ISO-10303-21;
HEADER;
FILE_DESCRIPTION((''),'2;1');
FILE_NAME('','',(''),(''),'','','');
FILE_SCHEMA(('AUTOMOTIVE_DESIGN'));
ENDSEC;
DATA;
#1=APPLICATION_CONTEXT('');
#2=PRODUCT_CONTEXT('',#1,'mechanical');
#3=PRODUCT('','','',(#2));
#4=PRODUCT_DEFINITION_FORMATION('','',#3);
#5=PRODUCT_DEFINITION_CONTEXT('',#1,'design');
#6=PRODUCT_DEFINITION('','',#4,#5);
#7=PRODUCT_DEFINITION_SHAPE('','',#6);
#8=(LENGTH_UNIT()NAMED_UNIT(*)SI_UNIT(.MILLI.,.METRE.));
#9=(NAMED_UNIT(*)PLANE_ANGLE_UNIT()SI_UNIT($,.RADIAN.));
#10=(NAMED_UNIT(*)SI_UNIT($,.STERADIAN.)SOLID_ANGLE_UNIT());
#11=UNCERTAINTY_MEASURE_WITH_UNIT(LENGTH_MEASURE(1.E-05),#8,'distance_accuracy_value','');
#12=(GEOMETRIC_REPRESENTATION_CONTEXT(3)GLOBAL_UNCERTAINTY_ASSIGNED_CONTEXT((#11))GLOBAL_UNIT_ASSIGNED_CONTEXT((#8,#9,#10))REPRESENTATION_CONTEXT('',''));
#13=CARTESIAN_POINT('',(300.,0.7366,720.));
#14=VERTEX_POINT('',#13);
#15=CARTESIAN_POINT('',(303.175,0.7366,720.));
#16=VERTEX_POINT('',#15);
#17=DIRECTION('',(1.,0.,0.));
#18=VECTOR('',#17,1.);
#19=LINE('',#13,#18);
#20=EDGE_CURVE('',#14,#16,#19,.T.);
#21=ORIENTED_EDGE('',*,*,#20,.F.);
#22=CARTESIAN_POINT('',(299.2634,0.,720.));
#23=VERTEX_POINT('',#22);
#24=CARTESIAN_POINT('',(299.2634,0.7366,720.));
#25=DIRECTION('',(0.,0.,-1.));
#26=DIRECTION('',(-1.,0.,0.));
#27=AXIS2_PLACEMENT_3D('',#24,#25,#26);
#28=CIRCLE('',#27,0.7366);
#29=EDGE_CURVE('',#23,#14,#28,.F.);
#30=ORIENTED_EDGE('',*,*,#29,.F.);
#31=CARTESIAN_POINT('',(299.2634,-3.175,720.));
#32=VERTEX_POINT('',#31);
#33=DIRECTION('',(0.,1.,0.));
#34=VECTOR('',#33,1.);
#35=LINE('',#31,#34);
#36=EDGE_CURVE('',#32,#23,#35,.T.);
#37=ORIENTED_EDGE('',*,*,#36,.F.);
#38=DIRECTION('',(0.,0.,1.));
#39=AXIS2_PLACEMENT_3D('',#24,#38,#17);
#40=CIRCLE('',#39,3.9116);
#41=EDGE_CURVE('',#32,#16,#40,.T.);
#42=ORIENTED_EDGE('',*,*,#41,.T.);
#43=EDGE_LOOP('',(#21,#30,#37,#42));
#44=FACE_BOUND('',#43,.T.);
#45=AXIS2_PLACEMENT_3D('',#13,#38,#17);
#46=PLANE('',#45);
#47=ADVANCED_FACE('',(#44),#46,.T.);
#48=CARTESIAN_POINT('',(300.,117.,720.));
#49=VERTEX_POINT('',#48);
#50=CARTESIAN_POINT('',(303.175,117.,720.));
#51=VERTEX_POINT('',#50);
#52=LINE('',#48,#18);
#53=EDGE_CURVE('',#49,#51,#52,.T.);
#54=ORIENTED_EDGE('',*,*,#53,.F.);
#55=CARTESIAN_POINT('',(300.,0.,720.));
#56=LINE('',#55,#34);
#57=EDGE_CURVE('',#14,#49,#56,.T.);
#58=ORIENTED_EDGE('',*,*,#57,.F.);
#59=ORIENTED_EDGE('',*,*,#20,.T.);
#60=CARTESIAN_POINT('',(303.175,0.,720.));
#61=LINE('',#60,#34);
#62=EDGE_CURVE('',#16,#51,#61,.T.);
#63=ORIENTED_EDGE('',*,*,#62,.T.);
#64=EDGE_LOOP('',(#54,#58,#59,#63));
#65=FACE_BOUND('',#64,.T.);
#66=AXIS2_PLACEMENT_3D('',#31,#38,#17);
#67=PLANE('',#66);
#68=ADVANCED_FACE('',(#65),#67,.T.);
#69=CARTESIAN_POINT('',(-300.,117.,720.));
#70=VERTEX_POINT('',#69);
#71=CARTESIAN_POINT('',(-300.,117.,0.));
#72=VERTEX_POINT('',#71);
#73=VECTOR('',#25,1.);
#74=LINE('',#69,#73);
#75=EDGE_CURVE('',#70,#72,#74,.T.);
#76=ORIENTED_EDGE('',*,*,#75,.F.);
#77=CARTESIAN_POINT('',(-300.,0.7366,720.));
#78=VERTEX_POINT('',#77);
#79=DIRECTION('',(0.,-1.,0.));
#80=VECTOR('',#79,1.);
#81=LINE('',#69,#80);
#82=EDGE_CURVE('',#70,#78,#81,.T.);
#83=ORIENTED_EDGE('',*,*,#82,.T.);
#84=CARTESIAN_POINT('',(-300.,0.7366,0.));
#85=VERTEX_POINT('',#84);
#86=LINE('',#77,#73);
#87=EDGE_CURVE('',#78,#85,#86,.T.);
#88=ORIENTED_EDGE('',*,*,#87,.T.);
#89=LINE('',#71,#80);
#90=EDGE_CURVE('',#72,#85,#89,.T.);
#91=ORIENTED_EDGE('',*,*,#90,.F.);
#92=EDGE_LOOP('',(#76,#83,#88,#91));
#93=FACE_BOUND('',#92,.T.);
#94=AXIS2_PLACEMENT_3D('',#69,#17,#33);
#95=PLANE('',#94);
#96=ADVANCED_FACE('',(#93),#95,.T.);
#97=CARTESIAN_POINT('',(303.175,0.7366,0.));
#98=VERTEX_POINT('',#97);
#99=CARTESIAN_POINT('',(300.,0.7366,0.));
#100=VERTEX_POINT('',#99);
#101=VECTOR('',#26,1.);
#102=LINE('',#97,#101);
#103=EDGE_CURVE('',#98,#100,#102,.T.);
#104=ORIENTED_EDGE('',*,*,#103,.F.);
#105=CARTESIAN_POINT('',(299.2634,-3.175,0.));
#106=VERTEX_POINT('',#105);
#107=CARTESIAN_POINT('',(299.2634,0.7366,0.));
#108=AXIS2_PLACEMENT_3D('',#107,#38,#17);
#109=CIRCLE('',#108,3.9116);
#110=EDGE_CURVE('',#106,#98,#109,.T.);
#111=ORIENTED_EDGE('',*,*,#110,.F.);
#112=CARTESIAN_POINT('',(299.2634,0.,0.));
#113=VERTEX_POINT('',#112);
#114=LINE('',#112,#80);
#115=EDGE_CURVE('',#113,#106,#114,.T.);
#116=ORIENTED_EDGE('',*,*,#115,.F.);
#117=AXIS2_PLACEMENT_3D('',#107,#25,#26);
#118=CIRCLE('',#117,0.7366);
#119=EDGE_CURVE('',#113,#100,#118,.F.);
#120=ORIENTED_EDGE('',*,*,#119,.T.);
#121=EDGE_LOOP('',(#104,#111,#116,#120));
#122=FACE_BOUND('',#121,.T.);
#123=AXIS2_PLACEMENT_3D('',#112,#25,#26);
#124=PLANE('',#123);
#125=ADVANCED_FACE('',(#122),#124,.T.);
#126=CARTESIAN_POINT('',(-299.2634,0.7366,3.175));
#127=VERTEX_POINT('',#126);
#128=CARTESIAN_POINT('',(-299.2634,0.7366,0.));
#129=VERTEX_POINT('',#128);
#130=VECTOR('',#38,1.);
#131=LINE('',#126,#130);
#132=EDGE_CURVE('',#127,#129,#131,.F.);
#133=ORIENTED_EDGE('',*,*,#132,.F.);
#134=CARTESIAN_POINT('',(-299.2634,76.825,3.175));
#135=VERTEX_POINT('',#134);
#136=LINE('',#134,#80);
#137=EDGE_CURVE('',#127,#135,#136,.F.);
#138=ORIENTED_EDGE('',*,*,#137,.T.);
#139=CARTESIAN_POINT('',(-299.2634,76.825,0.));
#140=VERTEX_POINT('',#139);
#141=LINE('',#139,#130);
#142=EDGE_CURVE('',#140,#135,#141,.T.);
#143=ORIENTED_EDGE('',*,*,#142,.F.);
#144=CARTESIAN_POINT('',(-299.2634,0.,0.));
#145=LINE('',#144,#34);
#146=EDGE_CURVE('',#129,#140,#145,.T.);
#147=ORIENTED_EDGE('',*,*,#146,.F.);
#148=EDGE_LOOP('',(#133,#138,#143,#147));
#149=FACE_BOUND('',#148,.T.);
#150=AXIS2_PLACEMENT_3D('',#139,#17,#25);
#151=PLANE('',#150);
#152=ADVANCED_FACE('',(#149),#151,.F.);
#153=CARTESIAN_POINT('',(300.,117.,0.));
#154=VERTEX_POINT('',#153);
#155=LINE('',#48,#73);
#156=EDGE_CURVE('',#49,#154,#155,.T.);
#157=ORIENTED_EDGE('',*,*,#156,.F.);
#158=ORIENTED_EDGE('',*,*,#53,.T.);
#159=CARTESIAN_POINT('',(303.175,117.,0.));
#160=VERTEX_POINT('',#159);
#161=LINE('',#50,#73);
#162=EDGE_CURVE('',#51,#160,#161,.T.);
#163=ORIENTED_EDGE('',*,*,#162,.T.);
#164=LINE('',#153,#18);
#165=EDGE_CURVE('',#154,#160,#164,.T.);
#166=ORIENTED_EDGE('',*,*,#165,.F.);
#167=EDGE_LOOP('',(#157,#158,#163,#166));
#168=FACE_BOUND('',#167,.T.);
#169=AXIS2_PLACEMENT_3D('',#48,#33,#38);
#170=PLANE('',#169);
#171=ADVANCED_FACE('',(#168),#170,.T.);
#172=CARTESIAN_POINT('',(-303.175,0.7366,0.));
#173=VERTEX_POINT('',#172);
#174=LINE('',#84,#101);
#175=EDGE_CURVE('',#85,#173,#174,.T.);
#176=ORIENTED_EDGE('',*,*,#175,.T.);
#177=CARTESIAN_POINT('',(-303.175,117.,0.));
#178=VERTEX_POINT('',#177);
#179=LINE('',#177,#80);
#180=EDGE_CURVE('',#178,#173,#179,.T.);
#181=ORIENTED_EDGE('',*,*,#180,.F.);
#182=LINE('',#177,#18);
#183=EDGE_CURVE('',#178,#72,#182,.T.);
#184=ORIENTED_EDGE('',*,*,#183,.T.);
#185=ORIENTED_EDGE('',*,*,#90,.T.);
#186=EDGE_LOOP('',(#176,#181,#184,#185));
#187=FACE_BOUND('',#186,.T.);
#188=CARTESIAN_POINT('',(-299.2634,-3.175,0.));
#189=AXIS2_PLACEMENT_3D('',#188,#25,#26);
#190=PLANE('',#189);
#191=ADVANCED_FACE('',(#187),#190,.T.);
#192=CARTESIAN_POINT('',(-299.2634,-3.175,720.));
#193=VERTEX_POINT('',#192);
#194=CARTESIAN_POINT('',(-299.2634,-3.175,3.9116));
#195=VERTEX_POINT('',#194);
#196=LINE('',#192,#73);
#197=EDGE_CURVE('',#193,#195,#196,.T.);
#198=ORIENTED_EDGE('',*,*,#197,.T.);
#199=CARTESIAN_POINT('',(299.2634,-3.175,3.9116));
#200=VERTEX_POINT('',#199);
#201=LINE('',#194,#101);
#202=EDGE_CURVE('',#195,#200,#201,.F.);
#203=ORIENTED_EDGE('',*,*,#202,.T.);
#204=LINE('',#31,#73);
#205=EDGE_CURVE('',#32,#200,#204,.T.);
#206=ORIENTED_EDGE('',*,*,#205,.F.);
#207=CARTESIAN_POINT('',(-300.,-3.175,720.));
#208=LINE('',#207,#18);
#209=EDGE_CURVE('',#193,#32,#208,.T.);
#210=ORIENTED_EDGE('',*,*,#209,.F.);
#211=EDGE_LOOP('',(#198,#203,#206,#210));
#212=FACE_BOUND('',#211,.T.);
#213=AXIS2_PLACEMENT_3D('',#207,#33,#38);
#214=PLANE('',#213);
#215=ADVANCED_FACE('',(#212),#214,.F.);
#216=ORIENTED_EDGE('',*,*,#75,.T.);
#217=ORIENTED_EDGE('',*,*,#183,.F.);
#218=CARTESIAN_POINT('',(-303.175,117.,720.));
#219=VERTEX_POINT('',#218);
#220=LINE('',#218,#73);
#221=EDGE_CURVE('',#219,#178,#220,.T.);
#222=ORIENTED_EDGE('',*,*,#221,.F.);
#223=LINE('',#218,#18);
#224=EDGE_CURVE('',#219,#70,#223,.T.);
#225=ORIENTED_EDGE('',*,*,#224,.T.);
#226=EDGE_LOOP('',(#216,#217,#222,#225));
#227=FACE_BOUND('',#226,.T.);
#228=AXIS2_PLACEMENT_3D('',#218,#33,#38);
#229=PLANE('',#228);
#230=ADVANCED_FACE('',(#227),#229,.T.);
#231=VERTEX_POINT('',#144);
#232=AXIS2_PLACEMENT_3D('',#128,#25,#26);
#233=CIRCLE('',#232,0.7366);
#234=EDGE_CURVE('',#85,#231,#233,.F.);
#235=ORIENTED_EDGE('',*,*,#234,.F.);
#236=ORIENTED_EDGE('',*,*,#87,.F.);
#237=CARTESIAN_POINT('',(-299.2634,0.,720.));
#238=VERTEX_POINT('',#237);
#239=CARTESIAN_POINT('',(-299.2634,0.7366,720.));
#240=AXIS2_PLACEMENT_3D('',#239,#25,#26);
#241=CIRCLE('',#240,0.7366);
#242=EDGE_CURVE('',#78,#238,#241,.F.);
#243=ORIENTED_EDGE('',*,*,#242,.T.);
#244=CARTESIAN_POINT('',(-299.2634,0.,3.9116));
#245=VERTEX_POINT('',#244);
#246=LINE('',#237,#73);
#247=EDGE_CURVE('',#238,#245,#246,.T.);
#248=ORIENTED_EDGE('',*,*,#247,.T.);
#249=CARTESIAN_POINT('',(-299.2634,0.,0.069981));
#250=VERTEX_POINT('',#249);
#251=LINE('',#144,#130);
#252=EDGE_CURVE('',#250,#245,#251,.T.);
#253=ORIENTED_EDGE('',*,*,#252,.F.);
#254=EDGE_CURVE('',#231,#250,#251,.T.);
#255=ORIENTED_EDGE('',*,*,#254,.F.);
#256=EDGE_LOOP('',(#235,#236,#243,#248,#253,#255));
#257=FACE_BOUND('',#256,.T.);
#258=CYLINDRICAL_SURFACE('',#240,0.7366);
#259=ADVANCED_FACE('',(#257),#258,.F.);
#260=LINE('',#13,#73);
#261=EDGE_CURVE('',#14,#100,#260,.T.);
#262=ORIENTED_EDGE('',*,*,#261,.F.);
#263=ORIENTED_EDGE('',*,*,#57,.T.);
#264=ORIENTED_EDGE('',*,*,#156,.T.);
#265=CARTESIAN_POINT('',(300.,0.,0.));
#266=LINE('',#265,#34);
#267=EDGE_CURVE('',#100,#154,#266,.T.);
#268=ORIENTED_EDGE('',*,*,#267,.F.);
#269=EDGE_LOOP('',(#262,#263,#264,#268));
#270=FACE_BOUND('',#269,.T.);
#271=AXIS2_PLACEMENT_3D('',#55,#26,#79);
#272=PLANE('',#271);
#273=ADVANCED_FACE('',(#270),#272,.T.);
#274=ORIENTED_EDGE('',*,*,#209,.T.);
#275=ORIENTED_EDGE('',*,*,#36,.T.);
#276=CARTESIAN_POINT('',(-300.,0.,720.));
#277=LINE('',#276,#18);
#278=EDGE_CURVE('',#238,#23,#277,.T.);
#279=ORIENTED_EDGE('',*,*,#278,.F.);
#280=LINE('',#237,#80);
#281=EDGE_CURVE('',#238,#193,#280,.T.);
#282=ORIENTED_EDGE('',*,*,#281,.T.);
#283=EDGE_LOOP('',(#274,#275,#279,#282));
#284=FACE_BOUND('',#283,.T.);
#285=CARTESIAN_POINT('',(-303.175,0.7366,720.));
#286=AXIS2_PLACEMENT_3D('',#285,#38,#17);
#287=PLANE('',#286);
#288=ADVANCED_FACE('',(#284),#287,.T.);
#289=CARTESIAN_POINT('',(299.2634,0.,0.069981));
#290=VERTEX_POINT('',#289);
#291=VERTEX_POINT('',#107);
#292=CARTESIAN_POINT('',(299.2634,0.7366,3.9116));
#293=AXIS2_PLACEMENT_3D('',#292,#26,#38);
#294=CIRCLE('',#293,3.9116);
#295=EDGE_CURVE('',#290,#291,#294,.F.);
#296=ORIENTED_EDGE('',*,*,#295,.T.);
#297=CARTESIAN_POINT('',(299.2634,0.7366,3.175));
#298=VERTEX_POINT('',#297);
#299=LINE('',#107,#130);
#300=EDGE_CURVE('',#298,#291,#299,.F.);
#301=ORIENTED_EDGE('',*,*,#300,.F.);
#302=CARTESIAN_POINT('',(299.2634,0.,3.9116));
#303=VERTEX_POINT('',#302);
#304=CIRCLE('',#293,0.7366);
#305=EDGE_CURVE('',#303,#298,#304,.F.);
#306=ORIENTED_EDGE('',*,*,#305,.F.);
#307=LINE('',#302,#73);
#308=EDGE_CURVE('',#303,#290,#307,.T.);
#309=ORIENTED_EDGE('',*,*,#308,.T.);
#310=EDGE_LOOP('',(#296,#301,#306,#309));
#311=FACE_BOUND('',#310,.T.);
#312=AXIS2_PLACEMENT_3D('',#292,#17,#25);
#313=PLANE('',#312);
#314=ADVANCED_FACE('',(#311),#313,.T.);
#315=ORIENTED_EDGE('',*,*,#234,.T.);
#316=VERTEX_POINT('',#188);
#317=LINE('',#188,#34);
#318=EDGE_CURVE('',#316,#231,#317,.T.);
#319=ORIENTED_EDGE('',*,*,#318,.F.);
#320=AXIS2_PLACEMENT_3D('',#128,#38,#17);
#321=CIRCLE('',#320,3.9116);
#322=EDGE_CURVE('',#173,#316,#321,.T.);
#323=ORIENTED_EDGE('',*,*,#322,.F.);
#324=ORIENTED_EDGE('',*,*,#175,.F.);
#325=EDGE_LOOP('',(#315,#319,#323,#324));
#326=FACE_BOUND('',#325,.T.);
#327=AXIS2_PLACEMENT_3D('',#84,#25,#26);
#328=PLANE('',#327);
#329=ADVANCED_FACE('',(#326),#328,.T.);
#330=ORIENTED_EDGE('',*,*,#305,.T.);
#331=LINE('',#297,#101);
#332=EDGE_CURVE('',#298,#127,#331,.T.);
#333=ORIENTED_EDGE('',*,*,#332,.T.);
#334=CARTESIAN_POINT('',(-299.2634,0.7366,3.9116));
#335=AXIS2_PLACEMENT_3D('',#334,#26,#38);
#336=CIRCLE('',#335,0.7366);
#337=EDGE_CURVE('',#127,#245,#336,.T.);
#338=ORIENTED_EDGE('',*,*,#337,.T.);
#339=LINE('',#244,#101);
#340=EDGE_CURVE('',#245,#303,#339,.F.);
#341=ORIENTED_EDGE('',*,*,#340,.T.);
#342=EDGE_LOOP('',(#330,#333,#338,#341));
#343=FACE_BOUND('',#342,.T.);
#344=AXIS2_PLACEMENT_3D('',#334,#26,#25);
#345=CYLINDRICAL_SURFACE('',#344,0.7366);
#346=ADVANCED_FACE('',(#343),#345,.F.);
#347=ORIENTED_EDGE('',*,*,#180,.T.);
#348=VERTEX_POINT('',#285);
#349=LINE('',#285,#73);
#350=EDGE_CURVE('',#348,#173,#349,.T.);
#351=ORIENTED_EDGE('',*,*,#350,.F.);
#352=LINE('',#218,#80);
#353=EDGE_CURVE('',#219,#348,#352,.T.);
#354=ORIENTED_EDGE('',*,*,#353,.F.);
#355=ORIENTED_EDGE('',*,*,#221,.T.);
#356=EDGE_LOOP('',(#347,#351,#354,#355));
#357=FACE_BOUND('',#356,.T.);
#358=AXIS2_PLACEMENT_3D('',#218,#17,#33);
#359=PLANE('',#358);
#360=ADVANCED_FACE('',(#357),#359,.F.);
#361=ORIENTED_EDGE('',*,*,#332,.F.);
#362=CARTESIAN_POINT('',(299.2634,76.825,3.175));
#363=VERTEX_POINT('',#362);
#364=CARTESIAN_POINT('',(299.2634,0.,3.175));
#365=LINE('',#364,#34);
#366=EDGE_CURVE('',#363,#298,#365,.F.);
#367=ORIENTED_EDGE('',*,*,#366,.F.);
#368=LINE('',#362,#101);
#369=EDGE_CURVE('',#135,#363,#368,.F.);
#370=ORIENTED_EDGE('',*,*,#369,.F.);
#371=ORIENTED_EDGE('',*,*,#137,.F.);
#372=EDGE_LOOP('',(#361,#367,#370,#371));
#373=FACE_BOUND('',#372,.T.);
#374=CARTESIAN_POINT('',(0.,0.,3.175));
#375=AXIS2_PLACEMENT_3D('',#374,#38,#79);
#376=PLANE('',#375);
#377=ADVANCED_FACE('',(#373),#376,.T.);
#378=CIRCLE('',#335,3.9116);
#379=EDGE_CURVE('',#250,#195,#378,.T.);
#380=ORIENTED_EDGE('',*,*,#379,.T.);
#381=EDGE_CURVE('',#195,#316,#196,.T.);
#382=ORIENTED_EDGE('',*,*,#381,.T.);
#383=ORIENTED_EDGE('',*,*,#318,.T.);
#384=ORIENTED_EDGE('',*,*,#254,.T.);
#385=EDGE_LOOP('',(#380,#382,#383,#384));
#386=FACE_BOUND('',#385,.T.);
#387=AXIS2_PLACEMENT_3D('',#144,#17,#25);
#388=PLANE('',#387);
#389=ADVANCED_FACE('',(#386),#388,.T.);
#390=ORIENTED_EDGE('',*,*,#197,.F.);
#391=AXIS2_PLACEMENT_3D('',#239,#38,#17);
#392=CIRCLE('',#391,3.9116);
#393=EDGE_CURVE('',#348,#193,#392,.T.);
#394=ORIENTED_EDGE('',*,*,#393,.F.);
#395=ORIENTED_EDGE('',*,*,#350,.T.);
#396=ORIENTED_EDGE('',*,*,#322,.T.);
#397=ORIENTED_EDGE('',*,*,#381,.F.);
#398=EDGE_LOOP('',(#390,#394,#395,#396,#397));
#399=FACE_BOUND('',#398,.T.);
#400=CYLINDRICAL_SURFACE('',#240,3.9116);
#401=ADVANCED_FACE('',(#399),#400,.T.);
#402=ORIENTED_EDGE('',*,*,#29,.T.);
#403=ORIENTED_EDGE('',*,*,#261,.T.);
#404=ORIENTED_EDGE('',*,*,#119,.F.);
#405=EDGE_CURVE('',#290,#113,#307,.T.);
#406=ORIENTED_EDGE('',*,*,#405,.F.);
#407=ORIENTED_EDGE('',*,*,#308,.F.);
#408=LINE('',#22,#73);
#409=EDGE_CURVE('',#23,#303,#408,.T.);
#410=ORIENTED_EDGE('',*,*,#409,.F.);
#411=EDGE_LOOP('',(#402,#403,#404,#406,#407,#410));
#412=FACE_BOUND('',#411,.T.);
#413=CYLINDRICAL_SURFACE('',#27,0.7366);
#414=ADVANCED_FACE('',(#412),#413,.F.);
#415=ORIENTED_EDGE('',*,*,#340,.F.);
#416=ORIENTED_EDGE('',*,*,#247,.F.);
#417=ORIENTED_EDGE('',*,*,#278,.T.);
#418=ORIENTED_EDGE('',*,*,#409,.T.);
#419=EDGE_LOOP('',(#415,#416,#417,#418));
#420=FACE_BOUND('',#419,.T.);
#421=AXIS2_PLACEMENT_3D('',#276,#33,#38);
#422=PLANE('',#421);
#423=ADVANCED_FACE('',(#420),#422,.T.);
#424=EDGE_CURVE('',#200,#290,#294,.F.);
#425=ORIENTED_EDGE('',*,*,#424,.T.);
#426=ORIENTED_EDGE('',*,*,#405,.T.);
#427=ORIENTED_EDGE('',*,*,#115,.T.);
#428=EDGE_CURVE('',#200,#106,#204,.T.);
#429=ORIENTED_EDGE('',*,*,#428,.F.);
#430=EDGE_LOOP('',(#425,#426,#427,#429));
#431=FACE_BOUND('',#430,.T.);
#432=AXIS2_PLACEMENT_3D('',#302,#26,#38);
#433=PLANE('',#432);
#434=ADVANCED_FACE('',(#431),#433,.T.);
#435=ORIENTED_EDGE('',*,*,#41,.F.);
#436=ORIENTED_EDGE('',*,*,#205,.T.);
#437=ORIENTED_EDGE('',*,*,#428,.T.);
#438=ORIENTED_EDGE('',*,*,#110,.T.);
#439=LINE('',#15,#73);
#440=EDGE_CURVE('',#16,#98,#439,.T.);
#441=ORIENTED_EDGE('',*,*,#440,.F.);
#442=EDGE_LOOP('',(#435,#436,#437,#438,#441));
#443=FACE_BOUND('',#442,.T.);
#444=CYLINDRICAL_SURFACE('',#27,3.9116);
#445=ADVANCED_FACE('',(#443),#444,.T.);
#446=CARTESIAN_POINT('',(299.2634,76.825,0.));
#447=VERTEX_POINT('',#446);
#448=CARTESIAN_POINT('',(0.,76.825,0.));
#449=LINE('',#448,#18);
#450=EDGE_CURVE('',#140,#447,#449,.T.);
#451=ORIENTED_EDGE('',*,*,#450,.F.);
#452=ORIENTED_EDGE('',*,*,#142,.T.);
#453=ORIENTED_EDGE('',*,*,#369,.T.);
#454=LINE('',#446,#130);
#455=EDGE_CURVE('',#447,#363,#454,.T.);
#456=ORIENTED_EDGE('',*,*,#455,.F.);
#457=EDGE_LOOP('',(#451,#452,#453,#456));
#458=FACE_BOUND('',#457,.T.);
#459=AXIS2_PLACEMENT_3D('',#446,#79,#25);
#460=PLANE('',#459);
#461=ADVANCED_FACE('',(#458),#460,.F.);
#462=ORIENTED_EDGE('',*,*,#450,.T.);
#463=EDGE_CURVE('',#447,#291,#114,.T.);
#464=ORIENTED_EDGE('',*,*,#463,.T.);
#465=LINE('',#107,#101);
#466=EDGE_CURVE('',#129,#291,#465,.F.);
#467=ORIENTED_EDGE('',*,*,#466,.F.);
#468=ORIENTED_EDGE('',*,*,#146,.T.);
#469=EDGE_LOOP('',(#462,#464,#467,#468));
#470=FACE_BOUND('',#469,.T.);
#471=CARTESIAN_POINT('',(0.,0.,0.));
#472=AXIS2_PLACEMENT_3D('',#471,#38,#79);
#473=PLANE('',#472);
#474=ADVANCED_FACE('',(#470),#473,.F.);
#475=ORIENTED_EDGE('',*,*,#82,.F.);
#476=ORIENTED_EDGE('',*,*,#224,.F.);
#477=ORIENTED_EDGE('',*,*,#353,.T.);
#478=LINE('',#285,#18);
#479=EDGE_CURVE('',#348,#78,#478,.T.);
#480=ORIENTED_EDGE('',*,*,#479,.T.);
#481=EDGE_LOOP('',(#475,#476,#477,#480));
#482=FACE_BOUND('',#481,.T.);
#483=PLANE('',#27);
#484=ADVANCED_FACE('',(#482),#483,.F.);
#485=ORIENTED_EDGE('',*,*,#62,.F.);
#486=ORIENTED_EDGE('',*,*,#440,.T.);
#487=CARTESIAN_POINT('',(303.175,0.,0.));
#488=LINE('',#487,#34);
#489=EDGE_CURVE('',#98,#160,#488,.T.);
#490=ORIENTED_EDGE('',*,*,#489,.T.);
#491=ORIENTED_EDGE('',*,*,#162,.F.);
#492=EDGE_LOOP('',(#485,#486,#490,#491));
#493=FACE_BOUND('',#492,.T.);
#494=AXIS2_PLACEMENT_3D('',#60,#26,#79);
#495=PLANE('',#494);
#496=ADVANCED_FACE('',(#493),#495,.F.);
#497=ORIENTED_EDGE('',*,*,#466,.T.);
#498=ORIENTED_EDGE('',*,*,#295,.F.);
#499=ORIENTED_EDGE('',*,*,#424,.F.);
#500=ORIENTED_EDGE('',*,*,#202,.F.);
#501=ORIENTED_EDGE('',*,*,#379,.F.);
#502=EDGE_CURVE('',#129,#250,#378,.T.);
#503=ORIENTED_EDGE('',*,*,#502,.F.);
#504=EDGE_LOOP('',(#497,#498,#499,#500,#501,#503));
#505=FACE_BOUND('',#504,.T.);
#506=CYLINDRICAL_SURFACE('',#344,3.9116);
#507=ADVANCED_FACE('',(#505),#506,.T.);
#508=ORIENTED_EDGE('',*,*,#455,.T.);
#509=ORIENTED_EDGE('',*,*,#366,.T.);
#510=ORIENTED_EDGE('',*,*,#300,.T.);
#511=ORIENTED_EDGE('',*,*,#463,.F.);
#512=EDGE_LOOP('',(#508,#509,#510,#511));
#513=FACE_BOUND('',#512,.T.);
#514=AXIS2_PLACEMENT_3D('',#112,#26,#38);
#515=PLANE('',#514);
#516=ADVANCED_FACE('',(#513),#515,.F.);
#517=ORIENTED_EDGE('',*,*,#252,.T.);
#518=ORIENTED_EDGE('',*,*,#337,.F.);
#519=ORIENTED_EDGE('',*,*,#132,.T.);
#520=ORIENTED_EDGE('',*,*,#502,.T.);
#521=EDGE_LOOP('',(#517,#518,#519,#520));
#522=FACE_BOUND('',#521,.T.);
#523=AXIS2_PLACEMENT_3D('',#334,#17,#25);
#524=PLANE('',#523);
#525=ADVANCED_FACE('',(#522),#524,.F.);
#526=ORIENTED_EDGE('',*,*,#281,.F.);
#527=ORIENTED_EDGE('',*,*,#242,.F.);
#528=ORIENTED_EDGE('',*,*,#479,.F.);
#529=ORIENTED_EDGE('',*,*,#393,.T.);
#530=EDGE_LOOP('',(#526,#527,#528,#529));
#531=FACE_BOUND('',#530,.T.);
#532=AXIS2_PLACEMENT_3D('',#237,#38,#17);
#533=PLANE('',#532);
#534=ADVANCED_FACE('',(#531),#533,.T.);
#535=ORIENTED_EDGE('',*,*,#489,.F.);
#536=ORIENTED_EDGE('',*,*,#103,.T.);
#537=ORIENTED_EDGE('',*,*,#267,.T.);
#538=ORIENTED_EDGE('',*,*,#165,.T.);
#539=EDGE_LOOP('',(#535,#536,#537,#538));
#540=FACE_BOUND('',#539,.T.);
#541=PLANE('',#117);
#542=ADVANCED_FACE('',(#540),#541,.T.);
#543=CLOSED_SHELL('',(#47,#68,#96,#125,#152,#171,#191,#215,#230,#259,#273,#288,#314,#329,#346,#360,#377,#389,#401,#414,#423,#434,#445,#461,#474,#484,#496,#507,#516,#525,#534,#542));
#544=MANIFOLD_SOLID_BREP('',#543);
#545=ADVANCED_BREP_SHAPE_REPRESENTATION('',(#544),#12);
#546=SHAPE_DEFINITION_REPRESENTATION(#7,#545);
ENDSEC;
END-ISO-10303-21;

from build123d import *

# Parameters (mm, degrees)
BASE_FLANGE1_DEPTH           = 720
EDGE_FLANGE1_STRIP_W         = 14.1732
EDGE_FLANGE1_STRIP_H         = 3.175
EDGE_FLANGE1_STRIP_CUT_DEPTH = 598.5268
EDGE_FLANGE1_DEPTH           = 598.5268


# Sheet-metal steps are written as plain solids
with BuildPart() as part:
    # Sketch1 → Base-Flange1 (new body)
    with BuildSketch(Plane.XY):
        with BuildLine():
            Line((-300, 117), (-300, 0.7366))
            ThreePointArc((-300, 0.7366), (-299.784254855, 0.215745145), (-299.2634, 0))
            Line((-299.2634, 0), (299.2634, 0))
            ThreePointArc((299.2634, 0), (299.784254855, 0.215745145), (300, 0.7366))
            Line((300, 0.7366), (300, 117))
            Line((300, 117), (303.175, 117))
            Line((303.175, 117), (303.175, 0.7366))
            ThreePointArc((303.175, 0.7366), (302.029318885, -2.029318885), (299.2634, -3.175))
            Line((299.2634, -3.175), (-299.2634, -3.175))
            ThreePointArc((-299.2634, -3.175), (-302.029318885, -2.029318885), (-303.175, 0.7366))
            Line((-303.175, 0.7366), (-303.175, 117))
            Line((-303.175, 117), (-300, 117))
        make_face()
    extrude(amount=BASE_FLANGE1_DEPTH)

    # Edge-Flange1 strip (across the edge) → Edge-Flange1 strip cut (cut)
    with BuildSketch(Plane.ZY.offset(-299.2634)):
        with Locations((-3.175, -1.5875)):
            Rectangle(EDGE_FLANGE1_STRIP_W, EDGE_FLANGE1_STRIP_H)
    extrude(amount=EDGE_FLANGE1_STRIP_CUT_DEPTH, mode=Mode.SUBTRACT)

    # Edge-Flange1 section (across the edge) → Edge-Flange1 (add)
    with BuildSketch(Plane.ZY.offset(-299.2634)):
        with BuildLine():
            Line((0, 0.7366), (0, 76.825))
            Line((0, 76.825), (3.175, 76.825))
            Line((3.175, 76.825), (3.175, 0.7366))
            ThreePointArc((3.175, 0.7366), (3.390745145, 0.215745145), (3.9116, 0))
            Line((3.9116, 0), (3.9116, -3.175))
            ThreePointArc((3.9116, -3.175), (1.145681115, -2.029318885), (0, 0.7366))
        make_face()
    extrude(amount=EDGE_FLANGE1_DEPTH)


solid = part.part
